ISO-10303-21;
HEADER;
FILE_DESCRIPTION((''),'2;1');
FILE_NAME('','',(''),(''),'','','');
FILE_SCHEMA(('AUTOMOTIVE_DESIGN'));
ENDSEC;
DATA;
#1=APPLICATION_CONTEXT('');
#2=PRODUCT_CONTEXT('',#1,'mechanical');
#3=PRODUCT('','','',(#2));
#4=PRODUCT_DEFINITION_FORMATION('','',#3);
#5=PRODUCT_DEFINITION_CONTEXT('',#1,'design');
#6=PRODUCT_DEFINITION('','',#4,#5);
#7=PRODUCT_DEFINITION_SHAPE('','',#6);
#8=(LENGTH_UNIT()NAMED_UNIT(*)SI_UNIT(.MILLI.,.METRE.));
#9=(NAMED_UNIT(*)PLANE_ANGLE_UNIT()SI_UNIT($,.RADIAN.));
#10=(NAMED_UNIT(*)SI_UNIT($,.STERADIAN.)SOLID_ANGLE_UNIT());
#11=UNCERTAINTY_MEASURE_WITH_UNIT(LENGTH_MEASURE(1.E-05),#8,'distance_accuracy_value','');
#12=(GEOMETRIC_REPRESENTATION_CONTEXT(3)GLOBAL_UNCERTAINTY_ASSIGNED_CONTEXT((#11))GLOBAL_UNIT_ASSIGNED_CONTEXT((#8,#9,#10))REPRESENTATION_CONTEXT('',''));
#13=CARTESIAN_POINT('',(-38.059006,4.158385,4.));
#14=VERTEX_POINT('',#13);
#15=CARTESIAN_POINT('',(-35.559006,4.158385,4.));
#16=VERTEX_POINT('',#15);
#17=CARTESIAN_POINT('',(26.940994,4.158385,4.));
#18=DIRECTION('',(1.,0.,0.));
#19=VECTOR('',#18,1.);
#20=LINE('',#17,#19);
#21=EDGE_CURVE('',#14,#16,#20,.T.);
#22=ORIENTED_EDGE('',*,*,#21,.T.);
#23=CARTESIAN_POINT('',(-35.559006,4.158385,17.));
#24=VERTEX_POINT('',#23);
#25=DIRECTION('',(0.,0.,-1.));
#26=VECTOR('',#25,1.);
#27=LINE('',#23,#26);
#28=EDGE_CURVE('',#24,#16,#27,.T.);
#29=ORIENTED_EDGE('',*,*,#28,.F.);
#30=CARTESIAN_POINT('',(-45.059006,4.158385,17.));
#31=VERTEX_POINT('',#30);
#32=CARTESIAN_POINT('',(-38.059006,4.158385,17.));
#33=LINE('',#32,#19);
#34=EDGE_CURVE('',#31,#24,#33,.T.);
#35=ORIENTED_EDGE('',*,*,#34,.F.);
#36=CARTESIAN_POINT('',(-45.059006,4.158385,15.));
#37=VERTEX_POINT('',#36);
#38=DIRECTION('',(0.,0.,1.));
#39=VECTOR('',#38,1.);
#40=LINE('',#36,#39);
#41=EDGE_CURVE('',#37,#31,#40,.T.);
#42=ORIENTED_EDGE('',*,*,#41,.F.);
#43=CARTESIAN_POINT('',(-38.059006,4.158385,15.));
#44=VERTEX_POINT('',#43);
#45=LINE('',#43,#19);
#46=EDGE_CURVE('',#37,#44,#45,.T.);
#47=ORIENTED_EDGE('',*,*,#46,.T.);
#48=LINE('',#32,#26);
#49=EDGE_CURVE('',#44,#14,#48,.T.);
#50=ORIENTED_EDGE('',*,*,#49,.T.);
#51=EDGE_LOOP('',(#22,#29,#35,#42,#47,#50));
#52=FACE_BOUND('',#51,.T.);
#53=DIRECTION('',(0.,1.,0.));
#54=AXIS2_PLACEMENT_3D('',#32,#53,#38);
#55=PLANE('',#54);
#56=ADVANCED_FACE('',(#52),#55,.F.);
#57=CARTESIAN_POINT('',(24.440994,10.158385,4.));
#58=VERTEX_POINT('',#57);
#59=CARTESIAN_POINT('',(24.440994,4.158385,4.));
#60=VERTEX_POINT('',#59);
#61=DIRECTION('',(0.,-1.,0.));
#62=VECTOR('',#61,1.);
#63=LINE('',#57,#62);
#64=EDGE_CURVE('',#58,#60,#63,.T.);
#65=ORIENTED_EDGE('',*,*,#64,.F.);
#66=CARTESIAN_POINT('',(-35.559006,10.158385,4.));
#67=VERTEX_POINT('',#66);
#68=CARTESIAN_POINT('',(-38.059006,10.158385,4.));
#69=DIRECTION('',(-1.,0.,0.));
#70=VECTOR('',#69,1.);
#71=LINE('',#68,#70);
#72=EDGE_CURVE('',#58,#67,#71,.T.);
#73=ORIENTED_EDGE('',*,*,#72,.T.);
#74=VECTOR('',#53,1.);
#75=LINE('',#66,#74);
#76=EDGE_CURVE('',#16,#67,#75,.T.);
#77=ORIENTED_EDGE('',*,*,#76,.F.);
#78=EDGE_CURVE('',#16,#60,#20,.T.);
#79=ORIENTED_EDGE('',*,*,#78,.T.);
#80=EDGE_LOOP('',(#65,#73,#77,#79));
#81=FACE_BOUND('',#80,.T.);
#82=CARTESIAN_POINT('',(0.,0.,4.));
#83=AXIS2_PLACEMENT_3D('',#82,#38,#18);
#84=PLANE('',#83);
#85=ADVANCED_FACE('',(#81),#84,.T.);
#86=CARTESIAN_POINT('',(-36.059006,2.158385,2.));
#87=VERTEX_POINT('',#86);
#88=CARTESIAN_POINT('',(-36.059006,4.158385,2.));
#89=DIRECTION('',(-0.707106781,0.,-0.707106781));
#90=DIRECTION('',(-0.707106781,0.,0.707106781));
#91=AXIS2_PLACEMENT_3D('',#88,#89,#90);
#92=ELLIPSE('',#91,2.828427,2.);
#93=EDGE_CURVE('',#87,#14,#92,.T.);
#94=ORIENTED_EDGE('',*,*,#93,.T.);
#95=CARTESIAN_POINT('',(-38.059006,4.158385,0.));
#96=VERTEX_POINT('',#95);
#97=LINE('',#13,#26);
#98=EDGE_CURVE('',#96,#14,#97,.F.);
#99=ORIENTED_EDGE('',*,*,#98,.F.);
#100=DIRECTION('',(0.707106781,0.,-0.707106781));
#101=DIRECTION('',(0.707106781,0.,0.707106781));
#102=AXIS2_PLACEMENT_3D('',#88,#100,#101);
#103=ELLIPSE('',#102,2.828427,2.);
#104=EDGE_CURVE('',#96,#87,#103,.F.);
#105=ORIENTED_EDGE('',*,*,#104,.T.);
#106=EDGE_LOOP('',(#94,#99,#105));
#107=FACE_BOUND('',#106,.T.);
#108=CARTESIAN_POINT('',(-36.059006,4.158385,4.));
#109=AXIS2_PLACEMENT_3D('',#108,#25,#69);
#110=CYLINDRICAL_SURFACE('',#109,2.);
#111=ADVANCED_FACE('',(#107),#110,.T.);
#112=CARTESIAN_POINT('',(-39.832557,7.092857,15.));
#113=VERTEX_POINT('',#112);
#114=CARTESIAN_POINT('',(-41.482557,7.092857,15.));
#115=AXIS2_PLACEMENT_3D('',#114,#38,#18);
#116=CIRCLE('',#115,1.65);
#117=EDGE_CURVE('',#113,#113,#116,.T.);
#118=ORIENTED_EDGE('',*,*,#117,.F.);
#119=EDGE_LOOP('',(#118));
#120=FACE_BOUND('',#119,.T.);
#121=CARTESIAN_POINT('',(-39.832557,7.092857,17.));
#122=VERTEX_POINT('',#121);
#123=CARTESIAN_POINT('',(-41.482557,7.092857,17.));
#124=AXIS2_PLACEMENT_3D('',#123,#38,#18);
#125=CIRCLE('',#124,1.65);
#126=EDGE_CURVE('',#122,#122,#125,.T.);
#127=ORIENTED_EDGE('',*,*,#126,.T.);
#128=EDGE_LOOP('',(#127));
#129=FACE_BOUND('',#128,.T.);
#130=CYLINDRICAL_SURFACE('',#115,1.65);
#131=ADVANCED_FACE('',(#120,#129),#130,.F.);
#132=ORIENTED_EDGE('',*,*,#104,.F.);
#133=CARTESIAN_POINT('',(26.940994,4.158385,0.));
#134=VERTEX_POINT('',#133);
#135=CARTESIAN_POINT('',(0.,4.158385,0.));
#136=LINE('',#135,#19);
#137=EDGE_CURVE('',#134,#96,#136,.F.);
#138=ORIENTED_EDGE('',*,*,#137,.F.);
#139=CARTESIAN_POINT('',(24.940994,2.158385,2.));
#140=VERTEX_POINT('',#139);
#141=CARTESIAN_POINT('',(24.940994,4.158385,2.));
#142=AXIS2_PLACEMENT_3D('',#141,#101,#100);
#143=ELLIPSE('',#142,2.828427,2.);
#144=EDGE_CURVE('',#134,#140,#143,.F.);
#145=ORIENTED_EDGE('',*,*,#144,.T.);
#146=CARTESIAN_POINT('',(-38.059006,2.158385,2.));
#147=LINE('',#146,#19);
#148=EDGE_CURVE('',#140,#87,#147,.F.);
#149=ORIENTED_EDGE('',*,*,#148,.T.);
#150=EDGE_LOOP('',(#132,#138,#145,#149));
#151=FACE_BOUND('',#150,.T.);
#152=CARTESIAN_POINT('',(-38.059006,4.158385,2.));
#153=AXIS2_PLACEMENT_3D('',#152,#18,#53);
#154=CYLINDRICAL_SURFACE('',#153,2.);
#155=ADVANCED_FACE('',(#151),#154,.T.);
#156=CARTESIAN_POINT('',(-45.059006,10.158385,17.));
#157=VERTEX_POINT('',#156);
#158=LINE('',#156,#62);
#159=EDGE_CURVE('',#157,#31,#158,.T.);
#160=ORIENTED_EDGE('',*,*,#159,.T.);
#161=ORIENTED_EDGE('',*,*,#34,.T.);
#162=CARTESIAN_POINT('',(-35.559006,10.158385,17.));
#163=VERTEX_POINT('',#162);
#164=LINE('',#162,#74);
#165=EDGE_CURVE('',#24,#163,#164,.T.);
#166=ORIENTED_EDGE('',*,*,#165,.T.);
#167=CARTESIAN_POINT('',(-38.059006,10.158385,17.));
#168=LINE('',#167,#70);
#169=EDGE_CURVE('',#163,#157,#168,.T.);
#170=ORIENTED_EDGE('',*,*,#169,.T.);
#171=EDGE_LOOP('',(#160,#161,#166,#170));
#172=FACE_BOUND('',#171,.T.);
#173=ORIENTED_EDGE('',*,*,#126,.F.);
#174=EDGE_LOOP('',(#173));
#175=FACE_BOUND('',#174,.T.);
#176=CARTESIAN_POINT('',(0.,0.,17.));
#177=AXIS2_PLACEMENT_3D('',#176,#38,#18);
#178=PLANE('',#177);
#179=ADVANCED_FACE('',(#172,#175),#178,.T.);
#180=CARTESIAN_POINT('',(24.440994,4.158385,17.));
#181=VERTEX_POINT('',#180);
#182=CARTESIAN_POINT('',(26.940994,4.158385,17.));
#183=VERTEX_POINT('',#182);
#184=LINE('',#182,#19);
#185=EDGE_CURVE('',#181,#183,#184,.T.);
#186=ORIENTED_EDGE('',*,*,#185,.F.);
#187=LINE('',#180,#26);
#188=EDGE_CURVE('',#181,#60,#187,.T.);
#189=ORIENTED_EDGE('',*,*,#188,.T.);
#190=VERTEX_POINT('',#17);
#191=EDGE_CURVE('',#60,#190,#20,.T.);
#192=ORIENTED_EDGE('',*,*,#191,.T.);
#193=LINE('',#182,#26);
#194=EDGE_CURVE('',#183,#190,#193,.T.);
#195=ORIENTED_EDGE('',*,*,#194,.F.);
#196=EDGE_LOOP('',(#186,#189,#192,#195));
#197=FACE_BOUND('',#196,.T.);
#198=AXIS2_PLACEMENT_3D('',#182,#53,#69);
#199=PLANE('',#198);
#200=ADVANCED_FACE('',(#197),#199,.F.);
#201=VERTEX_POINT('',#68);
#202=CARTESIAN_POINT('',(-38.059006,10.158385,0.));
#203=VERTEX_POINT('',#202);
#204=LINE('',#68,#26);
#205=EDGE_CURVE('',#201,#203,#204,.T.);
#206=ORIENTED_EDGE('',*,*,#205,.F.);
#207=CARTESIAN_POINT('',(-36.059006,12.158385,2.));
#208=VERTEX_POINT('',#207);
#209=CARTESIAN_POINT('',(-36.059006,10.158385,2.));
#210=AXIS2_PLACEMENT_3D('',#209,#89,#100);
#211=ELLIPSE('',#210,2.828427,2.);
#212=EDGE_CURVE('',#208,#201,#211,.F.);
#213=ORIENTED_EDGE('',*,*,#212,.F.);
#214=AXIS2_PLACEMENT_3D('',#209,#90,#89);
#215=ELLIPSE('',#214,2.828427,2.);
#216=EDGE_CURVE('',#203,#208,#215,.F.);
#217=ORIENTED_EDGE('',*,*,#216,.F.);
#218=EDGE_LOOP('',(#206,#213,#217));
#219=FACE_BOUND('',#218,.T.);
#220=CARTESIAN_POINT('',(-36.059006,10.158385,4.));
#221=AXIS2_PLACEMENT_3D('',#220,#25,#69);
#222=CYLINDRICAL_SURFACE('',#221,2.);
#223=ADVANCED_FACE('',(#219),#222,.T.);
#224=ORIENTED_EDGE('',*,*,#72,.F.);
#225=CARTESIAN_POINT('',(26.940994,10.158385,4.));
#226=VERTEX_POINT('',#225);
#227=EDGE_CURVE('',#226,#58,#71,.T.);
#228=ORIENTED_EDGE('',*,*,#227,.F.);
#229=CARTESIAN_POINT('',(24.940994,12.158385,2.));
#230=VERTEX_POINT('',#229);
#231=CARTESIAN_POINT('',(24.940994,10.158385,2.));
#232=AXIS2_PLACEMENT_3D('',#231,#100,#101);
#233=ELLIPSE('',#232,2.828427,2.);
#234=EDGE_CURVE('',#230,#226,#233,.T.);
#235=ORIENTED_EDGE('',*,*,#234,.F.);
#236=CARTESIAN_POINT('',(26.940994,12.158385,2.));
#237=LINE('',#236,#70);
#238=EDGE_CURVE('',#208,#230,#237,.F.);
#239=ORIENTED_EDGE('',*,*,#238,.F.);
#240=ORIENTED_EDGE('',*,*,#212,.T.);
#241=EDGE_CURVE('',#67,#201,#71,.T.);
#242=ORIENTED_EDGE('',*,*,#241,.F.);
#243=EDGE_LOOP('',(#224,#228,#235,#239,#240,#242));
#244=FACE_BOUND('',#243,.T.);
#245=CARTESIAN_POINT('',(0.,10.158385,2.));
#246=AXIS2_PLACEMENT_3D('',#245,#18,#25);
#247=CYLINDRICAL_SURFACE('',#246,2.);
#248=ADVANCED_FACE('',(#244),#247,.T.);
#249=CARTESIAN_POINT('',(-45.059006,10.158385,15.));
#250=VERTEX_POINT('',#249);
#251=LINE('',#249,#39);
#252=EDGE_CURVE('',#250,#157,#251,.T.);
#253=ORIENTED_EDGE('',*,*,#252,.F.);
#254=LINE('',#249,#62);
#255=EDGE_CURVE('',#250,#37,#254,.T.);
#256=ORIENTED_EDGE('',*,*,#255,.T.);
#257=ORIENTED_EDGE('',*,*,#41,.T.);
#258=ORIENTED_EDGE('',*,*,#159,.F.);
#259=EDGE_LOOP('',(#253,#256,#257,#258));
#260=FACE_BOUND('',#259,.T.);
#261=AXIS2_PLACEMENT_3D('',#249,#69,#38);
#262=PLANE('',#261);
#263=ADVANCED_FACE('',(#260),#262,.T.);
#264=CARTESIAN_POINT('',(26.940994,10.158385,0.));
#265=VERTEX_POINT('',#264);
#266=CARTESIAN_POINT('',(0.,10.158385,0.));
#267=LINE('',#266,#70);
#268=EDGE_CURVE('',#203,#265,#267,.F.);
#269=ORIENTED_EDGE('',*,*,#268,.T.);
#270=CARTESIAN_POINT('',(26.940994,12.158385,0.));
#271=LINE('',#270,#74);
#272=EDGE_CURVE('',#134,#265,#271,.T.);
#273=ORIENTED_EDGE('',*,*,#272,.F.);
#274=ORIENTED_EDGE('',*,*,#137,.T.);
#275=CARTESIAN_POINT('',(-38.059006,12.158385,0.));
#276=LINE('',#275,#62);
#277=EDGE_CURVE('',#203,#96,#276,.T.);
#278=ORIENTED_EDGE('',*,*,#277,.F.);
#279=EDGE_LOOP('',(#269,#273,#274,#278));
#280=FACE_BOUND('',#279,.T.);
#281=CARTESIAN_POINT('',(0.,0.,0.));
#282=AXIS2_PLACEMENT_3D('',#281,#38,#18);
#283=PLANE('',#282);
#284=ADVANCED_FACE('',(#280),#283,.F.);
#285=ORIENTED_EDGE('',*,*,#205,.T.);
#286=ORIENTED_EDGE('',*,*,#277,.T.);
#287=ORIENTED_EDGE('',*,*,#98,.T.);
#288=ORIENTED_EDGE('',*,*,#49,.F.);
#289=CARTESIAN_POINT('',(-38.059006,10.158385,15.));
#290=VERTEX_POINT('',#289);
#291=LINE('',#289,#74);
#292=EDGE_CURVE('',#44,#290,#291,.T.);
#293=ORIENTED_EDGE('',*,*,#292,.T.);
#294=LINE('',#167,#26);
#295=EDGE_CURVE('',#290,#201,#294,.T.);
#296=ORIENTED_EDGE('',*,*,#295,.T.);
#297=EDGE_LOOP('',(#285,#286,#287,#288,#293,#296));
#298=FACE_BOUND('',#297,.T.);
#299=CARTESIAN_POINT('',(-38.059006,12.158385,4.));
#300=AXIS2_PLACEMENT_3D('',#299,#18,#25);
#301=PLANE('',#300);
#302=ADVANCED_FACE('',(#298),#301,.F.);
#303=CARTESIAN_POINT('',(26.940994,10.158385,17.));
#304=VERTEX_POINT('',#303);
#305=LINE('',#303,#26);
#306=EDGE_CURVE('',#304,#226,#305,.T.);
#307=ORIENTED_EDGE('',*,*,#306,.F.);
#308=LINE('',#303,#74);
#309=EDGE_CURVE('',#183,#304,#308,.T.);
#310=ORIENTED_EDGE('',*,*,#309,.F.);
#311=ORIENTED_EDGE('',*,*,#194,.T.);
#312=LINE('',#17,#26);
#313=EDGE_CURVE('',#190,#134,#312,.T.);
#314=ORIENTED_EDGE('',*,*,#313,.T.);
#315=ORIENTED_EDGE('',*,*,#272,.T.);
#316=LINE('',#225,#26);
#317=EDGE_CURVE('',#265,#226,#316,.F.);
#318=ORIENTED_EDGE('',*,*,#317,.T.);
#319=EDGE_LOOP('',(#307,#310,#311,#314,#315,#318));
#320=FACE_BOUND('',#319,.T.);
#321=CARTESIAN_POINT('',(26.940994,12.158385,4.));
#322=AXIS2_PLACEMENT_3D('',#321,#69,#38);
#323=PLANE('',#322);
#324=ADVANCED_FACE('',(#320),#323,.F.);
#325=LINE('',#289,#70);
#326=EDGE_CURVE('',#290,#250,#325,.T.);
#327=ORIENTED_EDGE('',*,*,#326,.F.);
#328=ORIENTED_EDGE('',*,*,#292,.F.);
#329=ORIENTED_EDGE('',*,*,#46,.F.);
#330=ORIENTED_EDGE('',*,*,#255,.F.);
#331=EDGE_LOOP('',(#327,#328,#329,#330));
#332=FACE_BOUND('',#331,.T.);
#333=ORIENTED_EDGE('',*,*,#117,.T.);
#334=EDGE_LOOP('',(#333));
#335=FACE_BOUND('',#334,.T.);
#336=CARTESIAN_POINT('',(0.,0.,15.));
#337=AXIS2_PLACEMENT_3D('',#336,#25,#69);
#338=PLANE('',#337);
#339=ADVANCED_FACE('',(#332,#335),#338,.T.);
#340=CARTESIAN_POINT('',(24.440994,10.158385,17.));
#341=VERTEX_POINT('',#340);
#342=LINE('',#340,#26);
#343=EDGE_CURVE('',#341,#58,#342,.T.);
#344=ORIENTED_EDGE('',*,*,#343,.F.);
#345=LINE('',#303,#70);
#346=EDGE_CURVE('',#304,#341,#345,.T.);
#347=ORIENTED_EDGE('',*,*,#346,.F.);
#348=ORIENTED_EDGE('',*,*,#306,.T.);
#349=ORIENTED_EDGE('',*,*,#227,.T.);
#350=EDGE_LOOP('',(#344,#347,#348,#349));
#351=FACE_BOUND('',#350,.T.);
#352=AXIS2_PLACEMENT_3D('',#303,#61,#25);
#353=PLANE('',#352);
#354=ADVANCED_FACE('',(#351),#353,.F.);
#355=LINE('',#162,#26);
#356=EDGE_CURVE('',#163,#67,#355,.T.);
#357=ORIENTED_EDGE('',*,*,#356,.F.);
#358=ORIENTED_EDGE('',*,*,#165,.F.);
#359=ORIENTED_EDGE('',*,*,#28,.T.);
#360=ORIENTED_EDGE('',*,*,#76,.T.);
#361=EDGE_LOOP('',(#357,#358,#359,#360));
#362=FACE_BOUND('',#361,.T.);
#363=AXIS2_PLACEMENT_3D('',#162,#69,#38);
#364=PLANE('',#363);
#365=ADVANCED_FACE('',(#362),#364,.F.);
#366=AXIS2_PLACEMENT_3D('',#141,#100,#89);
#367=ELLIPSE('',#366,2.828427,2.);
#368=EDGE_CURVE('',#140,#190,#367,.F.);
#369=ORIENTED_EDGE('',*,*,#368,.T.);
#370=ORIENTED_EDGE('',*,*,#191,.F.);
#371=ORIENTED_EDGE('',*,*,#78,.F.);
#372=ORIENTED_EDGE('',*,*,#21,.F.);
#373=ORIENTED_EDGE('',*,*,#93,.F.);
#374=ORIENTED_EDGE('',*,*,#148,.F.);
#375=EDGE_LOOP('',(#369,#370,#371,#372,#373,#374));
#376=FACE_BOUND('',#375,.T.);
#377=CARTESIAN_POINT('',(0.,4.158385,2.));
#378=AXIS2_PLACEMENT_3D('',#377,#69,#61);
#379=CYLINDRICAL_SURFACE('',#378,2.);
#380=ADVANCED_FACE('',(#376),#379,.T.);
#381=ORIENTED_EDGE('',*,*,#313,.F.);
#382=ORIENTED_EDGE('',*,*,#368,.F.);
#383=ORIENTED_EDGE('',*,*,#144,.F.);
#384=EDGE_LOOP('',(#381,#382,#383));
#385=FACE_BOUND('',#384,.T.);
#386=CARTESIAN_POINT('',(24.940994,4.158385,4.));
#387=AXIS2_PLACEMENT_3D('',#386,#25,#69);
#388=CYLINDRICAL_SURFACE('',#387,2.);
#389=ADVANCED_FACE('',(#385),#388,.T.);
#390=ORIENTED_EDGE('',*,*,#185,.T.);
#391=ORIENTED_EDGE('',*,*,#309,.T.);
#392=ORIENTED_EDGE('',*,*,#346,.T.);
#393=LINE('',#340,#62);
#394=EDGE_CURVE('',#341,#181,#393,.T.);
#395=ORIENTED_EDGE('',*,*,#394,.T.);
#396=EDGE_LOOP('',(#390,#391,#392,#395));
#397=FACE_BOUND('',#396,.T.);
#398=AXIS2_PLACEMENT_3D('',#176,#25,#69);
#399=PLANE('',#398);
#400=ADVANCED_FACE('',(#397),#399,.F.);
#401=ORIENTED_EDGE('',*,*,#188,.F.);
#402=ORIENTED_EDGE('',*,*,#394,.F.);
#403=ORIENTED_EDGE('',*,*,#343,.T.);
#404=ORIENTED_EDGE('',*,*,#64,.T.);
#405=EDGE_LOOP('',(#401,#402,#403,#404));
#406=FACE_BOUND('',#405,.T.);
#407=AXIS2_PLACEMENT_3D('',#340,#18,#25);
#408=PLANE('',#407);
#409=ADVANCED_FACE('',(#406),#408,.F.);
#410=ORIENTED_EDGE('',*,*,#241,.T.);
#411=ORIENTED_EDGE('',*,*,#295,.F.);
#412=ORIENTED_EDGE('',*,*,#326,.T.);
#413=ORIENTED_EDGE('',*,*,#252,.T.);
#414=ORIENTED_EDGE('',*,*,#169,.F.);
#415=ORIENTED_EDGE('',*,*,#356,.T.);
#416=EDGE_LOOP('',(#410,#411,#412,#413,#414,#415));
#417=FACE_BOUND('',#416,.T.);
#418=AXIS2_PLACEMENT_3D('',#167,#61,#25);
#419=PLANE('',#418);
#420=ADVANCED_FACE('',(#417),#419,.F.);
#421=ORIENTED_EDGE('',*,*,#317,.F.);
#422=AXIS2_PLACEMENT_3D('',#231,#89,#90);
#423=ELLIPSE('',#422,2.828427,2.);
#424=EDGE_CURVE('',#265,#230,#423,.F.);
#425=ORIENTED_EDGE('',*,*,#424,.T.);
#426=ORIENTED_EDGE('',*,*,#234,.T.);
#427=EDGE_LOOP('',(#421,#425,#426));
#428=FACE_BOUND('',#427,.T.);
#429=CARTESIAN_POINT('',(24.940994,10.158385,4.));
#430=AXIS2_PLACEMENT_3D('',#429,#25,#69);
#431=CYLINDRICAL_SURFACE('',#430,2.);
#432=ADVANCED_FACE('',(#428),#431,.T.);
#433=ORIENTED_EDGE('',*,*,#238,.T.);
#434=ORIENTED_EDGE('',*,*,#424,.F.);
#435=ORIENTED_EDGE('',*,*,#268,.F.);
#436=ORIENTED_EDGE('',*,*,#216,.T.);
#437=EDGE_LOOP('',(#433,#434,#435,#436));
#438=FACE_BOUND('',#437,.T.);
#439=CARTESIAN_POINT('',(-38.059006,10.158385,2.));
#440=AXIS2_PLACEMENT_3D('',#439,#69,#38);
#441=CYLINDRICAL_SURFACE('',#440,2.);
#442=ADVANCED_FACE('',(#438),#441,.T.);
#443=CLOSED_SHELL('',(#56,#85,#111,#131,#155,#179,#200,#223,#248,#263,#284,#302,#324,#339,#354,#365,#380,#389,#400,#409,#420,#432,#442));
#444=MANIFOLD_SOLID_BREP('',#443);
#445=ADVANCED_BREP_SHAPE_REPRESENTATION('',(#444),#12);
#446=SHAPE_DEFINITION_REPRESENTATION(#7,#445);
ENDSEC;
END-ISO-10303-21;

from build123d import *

# Parameters (mm, degrees)
ESQUISSE1_W        = 65
ESQUISSE1_H        = 10
BOSS_EXTRU_1_DEPTH = 4
CONG_1_R           = 2
ESQUISSE3_W        = 2.5
ESQUISSE3_H        = 6
BOSS_EXTRU_2_DEPTH = 13
ESQUISSE4_W        = 7
ESQUISSE4_H        = 6
ESQUISSE4_R        = 1.65
BOSS_EXTRU_3_DEPTH = 2


with BuildPart() as part:
    # Esquisse1 → Boss.-Extru.1 (new body)
    with BuildSketch(Plane.XY):
        with Locations((-5.559006211, 7.158385093)):
            Rectangle(ESQUISSE1_W, ESQUISSE1_H)
    extrude(amount=BOSS_EXTRU_1_DEPTH)

    # Congé1
    cong_1_edges = [part.edges().sort_by_distance(p)[0] for p in [
        (-5.559006211, 12.158385093, 4),
        (-5.559006211, 12.158385093, 0),
        (-5.559006211, 2.158385093, 0),
        (-38.059006211, 12.158385093, 2),
        (26.940993789, 12.158385093, 2),
        (26.940993789, 2.158385093, 2),
        (-38.059006211, 2.158385093, 2),
        (-5.559006211, 2.158385093, 4),
    ]]
    fillet(cong_1_edges, radius=CONG_1_R - 0.0001)  # a hair under: the kernel refuses the full size

    # Esquisse3 → Boss.-Extru.2 (add)
    with BuildSketch(Plane.XY.offset(4)):
        with Locations((-36.809006211, 7.158385093)):
            Rectangle(ESQUISSE3_W, ESQUISSE3_H)
        with Locations((25.690993789, 7.158385093)):
            Rectangle(ESQUISSE3_W, ESQUISSE3_H)
    extrude(amount=BOSS_EXTRU_2_DEPTH)

    # Esquisse4 → Boss.-Extru.3 (add)
    with BuildSketch(Plane.XY.offset(17)):
        with Locations((-41.559006211, 7.158385093)):
            Rectangle(ESQUISSE4_W, ESQUISSE4_H)
        with Locations((-41.482556552, 7.092856814)):
            Circle(ESQUISSE4_R, mode=Mode.SUBTRACT)
    extrude(amount=-BOSS_EXTRU_3_DEPTH)


solid = part.part
